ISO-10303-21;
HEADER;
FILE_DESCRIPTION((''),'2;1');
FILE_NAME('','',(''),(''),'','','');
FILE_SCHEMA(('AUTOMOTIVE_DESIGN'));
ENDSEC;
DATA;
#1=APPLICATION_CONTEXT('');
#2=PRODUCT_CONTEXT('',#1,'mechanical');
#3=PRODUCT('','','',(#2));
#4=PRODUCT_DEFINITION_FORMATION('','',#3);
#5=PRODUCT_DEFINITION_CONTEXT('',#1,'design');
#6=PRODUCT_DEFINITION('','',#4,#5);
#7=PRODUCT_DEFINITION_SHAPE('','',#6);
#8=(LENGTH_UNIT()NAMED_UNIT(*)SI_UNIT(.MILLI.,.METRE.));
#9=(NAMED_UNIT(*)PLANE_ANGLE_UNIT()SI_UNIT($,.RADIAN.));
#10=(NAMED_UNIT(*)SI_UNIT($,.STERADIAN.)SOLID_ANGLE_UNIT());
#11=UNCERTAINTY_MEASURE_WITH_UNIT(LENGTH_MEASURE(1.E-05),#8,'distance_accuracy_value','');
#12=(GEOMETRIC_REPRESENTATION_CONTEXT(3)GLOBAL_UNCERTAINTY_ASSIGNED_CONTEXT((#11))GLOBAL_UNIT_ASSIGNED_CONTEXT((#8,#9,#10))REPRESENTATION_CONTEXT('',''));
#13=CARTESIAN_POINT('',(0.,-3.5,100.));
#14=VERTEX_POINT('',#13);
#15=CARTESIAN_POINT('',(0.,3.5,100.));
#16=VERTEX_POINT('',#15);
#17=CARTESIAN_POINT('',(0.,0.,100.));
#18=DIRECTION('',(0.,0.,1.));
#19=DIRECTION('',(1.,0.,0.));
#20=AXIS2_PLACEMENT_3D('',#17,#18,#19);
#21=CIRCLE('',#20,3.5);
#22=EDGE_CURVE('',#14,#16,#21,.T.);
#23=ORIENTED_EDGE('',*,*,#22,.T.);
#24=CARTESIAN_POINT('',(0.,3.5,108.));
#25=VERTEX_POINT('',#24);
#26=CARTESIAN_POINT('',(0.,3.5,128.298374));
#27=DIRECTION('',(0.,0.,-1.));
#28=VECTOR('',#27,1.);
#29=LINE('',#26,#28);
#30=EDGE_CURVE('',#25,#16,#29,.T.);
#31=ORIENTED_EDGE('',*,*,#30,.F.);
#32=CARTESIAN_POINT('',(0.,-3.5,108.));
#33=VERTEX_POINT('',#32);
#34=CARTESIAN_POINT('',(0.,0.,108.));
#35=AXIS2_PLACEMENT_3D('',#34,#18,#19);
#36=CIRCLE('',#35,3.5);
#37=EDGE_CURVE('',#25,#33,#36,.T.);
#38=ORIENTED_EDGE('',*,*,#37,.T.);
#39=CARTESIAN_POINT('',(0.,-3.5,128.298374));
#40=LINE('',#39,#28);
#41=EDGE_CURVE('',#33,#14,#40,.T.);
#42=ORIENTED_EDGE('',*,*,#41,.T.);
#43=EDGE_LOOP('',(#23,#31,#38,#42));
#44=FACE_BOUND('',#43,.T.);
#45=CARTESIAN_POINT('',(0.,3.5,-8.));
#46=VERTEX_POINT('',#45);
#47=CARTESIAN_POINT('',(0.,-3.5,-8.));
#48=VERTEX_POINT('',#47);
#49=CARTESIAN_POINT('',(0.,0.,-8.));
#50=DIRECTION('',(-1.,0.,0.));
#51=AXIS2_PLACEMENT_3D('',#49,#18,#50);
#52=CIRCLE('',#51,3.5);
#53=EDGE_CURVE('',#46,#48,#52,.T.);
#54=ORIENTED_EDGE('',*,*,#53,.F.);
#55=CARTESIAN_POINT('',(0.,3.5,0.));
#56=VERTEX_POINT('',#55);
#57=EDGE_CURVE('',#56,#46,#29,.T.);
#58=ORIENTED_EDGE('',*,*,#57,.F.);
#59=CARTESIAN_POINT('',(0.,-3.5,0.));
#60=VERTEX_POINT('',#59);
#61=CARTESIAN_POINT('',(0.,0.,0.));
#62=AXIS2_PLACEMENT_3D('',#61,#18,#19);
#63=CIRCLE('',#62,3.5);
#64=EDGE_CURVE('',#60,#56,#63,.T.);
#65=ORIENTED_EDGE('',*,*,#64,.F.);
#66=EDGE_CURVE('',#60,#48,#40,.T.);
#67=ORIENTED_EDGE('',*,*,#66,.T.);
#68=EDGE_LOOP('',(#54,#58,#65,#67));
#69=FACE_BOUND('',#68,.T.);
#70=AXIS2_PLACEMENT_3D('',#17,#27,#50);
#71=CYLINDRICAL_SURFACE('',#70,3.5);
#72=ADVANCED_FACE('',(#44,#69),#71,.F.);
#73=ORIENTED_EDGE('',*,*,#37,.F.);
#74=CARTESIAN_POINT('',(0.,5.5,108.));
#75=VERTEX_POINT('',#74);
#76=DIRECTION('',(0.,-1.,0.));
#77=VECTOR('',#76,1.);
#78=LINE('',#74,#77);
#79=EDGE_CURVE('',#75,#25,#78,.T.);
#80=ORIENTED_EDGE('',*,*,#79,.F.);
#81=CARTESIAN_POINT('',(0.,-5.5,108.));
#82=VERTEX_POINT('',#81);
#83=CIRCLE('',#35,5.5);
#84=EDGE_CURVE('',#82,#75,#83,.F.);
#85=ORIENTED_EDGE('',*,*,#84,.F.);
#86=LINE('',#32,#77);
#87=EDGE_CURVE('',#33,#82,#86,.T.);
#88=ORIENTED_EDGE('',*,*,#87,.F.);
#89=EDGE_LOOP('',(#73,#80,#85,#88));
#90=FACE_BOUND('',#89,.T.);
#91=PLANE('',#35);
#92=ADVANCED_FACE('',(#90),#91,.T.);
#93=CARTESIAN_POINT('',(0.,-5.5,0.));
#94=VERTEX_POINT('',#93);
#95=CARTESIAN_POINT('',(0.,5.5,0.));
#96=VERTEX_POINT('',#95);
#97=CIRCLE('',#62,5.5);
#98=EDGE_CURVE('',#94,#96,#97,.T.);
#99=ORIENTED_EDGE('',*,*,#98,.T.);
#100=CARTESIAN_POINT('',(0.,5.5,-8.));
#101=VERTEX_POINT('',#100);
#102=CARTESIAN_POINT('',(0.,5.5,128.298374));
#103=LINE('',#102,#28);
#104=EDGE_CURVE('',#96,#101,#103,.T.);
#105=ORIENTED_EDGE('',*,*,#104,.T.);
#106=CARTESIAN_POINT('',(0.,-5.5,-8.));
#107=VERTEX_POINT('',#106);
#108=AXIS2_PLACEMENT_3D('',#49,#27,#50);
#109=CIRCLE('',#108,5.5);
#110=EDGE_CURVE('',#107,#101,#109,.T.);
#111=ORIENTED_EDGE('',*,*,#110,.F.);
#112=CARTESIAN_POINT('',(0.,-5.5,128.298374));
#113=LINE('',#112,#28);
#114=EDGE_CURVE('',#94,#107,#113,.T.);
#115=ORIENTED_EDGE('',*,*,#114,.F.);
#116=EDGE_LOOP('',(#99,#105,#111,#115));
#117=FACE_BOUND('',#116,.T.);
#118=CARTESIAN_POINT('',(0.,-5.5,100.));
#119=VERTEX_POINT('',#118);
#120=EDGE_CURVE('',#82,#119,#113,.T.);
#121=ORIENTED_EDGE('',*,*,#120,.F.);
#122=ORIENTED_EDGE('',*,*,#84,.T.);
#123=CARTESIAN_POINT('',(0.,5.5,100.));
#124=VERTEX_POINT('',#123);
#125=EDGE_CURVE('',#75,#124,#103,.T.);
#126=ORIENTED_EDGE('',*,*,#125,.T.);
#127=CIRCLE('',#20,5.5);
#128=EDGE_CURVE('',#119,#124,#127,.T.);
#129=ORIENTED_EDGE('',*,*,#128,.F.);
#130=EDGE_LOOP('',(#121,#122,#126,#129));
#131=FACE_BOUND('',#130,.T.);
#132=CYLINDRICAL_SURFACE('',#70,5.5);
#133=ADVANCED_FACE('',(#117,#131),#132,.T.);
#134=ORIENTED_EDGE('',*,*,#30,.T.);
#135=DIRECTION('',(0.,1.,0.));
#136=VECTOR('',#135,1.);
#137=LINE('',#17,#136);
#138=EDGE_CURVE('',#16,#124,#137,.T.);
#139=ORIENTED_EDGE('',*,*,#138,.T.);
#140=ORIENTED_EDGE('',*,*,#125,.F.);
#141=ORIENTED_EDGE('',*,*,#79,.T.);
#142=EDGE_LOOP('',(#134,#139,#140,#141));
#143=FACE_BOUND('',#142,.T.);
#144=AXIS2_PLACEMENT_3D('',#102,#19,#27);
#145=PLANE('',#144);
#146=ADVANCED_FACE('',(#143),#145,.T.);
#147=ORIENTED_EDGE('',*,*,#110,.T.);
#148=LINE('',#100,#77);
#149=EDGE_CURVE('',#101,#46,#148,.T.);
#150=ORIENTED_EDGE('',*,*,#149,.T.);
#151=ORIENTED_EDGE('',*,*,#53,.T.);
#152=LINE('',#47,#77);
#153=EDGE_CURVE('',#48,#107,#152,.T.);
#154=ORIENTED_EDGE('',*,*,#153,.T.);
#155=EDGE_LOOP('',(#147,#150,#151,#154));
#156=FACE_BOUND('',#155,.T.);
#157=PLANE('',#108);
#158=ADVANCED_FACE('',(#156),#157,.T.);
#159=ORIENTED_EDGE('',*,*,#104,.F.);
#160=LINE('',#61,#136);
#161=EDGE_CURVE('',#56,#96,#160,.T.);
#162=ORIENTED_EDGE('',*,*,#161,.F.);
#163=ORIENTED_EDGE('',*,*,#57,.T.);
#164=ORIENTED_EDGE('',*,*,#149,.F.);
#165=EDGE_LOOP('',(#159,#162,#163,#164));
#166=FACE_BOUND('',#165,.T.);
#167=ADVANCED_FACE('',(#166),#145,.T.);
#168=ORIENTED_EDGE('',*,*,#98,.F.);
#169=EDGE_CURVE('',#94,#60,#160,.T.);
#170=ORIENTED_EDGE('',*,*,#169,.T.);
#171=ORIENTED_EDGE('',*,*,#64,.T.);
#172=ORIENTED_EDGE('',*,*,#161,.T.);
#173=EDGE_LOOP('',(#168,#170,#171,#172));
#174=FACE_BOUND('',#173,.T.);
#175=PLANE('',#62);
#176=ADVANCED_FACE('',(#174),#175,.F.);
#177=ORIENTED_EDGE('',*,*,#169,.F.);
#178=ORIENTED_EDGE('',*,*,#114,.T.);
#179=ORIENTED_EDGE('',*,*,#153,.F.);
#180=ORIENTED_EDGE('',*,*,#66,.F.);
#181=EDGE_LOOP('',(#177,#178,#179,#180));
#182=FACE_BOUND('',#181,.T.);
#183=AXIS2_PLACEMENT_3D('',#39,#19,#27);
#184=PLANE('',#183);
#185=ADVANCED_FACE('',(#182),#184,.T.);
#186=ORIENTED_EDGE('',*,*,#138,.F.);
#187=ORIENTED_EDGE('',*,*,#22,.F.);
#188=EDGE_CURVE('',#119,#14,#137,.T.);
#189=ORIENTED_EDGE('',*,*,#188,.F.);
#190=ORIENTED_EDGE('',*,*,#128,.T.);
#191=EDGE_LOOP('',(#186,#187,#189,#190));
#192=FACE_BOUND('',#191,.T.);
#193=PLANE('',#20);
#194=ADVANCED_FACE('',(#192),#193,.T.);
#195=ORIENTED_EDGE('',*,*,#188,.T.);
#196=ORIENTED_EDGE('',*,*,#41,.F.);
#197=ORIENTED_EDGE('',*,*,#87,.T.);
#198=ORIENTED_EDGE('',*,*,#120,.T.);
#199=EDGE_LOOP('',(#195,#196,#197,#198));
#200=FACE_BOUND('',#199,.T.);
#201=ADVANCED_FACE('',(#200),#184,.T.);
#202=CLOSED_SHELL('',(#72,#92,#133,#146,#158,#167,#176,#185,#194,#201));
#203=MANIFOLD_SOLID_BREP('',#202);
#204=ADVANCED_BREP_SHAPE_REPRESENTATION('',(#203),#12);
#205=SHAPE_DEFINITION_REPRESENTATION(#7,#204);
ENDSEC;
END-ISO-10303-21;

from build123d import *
from build123d.topology import SkipClean

# Parameters (mm, degrees)
SKETCH1_R                                        = 5.5
SKETCH1_R_2                                      = 3.5
BOSS_EXTRUDE1_DLUGOSC_CALKOWITA_DEPTH            = 100
BOSS_EXTRUDE2_PRZEDLUZENIE_DO_MONTAZU_DEPTH      = 8
BOSS_EXTRUDE2_PRZEDLUZENIE_DO_MONTAZU_DEPTH_BACK = 108


with BuildPart() as part:
    # Sketch1 → Boss-Extrude1 dlugosc calkowita (new body)
    with BuildSketch(Plane.XY):
        Circle(SKETCH1_R)
        Circle(SKETCH1_R_2, mode=Mode.SUBTRACT)
    extrude(amount=BOSS_EXTRUDE1_DLUGOSC_CALKOWITA_DEPTH)

    # Sketch2 → Boss-Extrude2 przedluzenie do montazu (add, two sides: drawn at the far end of the back side and taken through both)
    with SkipClean():  # the faces are left unmerged after this step: merging them gives an invalid solid
        with BuildSketch(Plane(origin=(0, 0, 0), x_dir=(-1, 0, 0), z_dir=(0, 0, -1)).offset(-BOSS_EXTRUDE2_PRZEDLUZENIE_DO_MONTAZU_DEPTH_BACK)):
            with BuildLine():
                Line((0, 5.5), (0, 3.5))
                ThreePointArc((0, 3.5), (3.5, 0), (0, -3.5))
                Line((0, -3.5), (0, -5.5))
                ThreePointArc((0, -5.5), (5.5, 0), (0, 5.5))
            make_face()
        extrude(amount=BOSS_EXTRUDE2_PRZEDLUZENIE_DO_MONTAZU_DEPTH + BOSS_EXTRUDE2_PRZEDLUZENIE_DO_MONTAZU_DEPTH_BACK)
    add(part.part.scale(1), mode=Mode.REPLACE)  # the faces are merged on a copy


solid = part.part
